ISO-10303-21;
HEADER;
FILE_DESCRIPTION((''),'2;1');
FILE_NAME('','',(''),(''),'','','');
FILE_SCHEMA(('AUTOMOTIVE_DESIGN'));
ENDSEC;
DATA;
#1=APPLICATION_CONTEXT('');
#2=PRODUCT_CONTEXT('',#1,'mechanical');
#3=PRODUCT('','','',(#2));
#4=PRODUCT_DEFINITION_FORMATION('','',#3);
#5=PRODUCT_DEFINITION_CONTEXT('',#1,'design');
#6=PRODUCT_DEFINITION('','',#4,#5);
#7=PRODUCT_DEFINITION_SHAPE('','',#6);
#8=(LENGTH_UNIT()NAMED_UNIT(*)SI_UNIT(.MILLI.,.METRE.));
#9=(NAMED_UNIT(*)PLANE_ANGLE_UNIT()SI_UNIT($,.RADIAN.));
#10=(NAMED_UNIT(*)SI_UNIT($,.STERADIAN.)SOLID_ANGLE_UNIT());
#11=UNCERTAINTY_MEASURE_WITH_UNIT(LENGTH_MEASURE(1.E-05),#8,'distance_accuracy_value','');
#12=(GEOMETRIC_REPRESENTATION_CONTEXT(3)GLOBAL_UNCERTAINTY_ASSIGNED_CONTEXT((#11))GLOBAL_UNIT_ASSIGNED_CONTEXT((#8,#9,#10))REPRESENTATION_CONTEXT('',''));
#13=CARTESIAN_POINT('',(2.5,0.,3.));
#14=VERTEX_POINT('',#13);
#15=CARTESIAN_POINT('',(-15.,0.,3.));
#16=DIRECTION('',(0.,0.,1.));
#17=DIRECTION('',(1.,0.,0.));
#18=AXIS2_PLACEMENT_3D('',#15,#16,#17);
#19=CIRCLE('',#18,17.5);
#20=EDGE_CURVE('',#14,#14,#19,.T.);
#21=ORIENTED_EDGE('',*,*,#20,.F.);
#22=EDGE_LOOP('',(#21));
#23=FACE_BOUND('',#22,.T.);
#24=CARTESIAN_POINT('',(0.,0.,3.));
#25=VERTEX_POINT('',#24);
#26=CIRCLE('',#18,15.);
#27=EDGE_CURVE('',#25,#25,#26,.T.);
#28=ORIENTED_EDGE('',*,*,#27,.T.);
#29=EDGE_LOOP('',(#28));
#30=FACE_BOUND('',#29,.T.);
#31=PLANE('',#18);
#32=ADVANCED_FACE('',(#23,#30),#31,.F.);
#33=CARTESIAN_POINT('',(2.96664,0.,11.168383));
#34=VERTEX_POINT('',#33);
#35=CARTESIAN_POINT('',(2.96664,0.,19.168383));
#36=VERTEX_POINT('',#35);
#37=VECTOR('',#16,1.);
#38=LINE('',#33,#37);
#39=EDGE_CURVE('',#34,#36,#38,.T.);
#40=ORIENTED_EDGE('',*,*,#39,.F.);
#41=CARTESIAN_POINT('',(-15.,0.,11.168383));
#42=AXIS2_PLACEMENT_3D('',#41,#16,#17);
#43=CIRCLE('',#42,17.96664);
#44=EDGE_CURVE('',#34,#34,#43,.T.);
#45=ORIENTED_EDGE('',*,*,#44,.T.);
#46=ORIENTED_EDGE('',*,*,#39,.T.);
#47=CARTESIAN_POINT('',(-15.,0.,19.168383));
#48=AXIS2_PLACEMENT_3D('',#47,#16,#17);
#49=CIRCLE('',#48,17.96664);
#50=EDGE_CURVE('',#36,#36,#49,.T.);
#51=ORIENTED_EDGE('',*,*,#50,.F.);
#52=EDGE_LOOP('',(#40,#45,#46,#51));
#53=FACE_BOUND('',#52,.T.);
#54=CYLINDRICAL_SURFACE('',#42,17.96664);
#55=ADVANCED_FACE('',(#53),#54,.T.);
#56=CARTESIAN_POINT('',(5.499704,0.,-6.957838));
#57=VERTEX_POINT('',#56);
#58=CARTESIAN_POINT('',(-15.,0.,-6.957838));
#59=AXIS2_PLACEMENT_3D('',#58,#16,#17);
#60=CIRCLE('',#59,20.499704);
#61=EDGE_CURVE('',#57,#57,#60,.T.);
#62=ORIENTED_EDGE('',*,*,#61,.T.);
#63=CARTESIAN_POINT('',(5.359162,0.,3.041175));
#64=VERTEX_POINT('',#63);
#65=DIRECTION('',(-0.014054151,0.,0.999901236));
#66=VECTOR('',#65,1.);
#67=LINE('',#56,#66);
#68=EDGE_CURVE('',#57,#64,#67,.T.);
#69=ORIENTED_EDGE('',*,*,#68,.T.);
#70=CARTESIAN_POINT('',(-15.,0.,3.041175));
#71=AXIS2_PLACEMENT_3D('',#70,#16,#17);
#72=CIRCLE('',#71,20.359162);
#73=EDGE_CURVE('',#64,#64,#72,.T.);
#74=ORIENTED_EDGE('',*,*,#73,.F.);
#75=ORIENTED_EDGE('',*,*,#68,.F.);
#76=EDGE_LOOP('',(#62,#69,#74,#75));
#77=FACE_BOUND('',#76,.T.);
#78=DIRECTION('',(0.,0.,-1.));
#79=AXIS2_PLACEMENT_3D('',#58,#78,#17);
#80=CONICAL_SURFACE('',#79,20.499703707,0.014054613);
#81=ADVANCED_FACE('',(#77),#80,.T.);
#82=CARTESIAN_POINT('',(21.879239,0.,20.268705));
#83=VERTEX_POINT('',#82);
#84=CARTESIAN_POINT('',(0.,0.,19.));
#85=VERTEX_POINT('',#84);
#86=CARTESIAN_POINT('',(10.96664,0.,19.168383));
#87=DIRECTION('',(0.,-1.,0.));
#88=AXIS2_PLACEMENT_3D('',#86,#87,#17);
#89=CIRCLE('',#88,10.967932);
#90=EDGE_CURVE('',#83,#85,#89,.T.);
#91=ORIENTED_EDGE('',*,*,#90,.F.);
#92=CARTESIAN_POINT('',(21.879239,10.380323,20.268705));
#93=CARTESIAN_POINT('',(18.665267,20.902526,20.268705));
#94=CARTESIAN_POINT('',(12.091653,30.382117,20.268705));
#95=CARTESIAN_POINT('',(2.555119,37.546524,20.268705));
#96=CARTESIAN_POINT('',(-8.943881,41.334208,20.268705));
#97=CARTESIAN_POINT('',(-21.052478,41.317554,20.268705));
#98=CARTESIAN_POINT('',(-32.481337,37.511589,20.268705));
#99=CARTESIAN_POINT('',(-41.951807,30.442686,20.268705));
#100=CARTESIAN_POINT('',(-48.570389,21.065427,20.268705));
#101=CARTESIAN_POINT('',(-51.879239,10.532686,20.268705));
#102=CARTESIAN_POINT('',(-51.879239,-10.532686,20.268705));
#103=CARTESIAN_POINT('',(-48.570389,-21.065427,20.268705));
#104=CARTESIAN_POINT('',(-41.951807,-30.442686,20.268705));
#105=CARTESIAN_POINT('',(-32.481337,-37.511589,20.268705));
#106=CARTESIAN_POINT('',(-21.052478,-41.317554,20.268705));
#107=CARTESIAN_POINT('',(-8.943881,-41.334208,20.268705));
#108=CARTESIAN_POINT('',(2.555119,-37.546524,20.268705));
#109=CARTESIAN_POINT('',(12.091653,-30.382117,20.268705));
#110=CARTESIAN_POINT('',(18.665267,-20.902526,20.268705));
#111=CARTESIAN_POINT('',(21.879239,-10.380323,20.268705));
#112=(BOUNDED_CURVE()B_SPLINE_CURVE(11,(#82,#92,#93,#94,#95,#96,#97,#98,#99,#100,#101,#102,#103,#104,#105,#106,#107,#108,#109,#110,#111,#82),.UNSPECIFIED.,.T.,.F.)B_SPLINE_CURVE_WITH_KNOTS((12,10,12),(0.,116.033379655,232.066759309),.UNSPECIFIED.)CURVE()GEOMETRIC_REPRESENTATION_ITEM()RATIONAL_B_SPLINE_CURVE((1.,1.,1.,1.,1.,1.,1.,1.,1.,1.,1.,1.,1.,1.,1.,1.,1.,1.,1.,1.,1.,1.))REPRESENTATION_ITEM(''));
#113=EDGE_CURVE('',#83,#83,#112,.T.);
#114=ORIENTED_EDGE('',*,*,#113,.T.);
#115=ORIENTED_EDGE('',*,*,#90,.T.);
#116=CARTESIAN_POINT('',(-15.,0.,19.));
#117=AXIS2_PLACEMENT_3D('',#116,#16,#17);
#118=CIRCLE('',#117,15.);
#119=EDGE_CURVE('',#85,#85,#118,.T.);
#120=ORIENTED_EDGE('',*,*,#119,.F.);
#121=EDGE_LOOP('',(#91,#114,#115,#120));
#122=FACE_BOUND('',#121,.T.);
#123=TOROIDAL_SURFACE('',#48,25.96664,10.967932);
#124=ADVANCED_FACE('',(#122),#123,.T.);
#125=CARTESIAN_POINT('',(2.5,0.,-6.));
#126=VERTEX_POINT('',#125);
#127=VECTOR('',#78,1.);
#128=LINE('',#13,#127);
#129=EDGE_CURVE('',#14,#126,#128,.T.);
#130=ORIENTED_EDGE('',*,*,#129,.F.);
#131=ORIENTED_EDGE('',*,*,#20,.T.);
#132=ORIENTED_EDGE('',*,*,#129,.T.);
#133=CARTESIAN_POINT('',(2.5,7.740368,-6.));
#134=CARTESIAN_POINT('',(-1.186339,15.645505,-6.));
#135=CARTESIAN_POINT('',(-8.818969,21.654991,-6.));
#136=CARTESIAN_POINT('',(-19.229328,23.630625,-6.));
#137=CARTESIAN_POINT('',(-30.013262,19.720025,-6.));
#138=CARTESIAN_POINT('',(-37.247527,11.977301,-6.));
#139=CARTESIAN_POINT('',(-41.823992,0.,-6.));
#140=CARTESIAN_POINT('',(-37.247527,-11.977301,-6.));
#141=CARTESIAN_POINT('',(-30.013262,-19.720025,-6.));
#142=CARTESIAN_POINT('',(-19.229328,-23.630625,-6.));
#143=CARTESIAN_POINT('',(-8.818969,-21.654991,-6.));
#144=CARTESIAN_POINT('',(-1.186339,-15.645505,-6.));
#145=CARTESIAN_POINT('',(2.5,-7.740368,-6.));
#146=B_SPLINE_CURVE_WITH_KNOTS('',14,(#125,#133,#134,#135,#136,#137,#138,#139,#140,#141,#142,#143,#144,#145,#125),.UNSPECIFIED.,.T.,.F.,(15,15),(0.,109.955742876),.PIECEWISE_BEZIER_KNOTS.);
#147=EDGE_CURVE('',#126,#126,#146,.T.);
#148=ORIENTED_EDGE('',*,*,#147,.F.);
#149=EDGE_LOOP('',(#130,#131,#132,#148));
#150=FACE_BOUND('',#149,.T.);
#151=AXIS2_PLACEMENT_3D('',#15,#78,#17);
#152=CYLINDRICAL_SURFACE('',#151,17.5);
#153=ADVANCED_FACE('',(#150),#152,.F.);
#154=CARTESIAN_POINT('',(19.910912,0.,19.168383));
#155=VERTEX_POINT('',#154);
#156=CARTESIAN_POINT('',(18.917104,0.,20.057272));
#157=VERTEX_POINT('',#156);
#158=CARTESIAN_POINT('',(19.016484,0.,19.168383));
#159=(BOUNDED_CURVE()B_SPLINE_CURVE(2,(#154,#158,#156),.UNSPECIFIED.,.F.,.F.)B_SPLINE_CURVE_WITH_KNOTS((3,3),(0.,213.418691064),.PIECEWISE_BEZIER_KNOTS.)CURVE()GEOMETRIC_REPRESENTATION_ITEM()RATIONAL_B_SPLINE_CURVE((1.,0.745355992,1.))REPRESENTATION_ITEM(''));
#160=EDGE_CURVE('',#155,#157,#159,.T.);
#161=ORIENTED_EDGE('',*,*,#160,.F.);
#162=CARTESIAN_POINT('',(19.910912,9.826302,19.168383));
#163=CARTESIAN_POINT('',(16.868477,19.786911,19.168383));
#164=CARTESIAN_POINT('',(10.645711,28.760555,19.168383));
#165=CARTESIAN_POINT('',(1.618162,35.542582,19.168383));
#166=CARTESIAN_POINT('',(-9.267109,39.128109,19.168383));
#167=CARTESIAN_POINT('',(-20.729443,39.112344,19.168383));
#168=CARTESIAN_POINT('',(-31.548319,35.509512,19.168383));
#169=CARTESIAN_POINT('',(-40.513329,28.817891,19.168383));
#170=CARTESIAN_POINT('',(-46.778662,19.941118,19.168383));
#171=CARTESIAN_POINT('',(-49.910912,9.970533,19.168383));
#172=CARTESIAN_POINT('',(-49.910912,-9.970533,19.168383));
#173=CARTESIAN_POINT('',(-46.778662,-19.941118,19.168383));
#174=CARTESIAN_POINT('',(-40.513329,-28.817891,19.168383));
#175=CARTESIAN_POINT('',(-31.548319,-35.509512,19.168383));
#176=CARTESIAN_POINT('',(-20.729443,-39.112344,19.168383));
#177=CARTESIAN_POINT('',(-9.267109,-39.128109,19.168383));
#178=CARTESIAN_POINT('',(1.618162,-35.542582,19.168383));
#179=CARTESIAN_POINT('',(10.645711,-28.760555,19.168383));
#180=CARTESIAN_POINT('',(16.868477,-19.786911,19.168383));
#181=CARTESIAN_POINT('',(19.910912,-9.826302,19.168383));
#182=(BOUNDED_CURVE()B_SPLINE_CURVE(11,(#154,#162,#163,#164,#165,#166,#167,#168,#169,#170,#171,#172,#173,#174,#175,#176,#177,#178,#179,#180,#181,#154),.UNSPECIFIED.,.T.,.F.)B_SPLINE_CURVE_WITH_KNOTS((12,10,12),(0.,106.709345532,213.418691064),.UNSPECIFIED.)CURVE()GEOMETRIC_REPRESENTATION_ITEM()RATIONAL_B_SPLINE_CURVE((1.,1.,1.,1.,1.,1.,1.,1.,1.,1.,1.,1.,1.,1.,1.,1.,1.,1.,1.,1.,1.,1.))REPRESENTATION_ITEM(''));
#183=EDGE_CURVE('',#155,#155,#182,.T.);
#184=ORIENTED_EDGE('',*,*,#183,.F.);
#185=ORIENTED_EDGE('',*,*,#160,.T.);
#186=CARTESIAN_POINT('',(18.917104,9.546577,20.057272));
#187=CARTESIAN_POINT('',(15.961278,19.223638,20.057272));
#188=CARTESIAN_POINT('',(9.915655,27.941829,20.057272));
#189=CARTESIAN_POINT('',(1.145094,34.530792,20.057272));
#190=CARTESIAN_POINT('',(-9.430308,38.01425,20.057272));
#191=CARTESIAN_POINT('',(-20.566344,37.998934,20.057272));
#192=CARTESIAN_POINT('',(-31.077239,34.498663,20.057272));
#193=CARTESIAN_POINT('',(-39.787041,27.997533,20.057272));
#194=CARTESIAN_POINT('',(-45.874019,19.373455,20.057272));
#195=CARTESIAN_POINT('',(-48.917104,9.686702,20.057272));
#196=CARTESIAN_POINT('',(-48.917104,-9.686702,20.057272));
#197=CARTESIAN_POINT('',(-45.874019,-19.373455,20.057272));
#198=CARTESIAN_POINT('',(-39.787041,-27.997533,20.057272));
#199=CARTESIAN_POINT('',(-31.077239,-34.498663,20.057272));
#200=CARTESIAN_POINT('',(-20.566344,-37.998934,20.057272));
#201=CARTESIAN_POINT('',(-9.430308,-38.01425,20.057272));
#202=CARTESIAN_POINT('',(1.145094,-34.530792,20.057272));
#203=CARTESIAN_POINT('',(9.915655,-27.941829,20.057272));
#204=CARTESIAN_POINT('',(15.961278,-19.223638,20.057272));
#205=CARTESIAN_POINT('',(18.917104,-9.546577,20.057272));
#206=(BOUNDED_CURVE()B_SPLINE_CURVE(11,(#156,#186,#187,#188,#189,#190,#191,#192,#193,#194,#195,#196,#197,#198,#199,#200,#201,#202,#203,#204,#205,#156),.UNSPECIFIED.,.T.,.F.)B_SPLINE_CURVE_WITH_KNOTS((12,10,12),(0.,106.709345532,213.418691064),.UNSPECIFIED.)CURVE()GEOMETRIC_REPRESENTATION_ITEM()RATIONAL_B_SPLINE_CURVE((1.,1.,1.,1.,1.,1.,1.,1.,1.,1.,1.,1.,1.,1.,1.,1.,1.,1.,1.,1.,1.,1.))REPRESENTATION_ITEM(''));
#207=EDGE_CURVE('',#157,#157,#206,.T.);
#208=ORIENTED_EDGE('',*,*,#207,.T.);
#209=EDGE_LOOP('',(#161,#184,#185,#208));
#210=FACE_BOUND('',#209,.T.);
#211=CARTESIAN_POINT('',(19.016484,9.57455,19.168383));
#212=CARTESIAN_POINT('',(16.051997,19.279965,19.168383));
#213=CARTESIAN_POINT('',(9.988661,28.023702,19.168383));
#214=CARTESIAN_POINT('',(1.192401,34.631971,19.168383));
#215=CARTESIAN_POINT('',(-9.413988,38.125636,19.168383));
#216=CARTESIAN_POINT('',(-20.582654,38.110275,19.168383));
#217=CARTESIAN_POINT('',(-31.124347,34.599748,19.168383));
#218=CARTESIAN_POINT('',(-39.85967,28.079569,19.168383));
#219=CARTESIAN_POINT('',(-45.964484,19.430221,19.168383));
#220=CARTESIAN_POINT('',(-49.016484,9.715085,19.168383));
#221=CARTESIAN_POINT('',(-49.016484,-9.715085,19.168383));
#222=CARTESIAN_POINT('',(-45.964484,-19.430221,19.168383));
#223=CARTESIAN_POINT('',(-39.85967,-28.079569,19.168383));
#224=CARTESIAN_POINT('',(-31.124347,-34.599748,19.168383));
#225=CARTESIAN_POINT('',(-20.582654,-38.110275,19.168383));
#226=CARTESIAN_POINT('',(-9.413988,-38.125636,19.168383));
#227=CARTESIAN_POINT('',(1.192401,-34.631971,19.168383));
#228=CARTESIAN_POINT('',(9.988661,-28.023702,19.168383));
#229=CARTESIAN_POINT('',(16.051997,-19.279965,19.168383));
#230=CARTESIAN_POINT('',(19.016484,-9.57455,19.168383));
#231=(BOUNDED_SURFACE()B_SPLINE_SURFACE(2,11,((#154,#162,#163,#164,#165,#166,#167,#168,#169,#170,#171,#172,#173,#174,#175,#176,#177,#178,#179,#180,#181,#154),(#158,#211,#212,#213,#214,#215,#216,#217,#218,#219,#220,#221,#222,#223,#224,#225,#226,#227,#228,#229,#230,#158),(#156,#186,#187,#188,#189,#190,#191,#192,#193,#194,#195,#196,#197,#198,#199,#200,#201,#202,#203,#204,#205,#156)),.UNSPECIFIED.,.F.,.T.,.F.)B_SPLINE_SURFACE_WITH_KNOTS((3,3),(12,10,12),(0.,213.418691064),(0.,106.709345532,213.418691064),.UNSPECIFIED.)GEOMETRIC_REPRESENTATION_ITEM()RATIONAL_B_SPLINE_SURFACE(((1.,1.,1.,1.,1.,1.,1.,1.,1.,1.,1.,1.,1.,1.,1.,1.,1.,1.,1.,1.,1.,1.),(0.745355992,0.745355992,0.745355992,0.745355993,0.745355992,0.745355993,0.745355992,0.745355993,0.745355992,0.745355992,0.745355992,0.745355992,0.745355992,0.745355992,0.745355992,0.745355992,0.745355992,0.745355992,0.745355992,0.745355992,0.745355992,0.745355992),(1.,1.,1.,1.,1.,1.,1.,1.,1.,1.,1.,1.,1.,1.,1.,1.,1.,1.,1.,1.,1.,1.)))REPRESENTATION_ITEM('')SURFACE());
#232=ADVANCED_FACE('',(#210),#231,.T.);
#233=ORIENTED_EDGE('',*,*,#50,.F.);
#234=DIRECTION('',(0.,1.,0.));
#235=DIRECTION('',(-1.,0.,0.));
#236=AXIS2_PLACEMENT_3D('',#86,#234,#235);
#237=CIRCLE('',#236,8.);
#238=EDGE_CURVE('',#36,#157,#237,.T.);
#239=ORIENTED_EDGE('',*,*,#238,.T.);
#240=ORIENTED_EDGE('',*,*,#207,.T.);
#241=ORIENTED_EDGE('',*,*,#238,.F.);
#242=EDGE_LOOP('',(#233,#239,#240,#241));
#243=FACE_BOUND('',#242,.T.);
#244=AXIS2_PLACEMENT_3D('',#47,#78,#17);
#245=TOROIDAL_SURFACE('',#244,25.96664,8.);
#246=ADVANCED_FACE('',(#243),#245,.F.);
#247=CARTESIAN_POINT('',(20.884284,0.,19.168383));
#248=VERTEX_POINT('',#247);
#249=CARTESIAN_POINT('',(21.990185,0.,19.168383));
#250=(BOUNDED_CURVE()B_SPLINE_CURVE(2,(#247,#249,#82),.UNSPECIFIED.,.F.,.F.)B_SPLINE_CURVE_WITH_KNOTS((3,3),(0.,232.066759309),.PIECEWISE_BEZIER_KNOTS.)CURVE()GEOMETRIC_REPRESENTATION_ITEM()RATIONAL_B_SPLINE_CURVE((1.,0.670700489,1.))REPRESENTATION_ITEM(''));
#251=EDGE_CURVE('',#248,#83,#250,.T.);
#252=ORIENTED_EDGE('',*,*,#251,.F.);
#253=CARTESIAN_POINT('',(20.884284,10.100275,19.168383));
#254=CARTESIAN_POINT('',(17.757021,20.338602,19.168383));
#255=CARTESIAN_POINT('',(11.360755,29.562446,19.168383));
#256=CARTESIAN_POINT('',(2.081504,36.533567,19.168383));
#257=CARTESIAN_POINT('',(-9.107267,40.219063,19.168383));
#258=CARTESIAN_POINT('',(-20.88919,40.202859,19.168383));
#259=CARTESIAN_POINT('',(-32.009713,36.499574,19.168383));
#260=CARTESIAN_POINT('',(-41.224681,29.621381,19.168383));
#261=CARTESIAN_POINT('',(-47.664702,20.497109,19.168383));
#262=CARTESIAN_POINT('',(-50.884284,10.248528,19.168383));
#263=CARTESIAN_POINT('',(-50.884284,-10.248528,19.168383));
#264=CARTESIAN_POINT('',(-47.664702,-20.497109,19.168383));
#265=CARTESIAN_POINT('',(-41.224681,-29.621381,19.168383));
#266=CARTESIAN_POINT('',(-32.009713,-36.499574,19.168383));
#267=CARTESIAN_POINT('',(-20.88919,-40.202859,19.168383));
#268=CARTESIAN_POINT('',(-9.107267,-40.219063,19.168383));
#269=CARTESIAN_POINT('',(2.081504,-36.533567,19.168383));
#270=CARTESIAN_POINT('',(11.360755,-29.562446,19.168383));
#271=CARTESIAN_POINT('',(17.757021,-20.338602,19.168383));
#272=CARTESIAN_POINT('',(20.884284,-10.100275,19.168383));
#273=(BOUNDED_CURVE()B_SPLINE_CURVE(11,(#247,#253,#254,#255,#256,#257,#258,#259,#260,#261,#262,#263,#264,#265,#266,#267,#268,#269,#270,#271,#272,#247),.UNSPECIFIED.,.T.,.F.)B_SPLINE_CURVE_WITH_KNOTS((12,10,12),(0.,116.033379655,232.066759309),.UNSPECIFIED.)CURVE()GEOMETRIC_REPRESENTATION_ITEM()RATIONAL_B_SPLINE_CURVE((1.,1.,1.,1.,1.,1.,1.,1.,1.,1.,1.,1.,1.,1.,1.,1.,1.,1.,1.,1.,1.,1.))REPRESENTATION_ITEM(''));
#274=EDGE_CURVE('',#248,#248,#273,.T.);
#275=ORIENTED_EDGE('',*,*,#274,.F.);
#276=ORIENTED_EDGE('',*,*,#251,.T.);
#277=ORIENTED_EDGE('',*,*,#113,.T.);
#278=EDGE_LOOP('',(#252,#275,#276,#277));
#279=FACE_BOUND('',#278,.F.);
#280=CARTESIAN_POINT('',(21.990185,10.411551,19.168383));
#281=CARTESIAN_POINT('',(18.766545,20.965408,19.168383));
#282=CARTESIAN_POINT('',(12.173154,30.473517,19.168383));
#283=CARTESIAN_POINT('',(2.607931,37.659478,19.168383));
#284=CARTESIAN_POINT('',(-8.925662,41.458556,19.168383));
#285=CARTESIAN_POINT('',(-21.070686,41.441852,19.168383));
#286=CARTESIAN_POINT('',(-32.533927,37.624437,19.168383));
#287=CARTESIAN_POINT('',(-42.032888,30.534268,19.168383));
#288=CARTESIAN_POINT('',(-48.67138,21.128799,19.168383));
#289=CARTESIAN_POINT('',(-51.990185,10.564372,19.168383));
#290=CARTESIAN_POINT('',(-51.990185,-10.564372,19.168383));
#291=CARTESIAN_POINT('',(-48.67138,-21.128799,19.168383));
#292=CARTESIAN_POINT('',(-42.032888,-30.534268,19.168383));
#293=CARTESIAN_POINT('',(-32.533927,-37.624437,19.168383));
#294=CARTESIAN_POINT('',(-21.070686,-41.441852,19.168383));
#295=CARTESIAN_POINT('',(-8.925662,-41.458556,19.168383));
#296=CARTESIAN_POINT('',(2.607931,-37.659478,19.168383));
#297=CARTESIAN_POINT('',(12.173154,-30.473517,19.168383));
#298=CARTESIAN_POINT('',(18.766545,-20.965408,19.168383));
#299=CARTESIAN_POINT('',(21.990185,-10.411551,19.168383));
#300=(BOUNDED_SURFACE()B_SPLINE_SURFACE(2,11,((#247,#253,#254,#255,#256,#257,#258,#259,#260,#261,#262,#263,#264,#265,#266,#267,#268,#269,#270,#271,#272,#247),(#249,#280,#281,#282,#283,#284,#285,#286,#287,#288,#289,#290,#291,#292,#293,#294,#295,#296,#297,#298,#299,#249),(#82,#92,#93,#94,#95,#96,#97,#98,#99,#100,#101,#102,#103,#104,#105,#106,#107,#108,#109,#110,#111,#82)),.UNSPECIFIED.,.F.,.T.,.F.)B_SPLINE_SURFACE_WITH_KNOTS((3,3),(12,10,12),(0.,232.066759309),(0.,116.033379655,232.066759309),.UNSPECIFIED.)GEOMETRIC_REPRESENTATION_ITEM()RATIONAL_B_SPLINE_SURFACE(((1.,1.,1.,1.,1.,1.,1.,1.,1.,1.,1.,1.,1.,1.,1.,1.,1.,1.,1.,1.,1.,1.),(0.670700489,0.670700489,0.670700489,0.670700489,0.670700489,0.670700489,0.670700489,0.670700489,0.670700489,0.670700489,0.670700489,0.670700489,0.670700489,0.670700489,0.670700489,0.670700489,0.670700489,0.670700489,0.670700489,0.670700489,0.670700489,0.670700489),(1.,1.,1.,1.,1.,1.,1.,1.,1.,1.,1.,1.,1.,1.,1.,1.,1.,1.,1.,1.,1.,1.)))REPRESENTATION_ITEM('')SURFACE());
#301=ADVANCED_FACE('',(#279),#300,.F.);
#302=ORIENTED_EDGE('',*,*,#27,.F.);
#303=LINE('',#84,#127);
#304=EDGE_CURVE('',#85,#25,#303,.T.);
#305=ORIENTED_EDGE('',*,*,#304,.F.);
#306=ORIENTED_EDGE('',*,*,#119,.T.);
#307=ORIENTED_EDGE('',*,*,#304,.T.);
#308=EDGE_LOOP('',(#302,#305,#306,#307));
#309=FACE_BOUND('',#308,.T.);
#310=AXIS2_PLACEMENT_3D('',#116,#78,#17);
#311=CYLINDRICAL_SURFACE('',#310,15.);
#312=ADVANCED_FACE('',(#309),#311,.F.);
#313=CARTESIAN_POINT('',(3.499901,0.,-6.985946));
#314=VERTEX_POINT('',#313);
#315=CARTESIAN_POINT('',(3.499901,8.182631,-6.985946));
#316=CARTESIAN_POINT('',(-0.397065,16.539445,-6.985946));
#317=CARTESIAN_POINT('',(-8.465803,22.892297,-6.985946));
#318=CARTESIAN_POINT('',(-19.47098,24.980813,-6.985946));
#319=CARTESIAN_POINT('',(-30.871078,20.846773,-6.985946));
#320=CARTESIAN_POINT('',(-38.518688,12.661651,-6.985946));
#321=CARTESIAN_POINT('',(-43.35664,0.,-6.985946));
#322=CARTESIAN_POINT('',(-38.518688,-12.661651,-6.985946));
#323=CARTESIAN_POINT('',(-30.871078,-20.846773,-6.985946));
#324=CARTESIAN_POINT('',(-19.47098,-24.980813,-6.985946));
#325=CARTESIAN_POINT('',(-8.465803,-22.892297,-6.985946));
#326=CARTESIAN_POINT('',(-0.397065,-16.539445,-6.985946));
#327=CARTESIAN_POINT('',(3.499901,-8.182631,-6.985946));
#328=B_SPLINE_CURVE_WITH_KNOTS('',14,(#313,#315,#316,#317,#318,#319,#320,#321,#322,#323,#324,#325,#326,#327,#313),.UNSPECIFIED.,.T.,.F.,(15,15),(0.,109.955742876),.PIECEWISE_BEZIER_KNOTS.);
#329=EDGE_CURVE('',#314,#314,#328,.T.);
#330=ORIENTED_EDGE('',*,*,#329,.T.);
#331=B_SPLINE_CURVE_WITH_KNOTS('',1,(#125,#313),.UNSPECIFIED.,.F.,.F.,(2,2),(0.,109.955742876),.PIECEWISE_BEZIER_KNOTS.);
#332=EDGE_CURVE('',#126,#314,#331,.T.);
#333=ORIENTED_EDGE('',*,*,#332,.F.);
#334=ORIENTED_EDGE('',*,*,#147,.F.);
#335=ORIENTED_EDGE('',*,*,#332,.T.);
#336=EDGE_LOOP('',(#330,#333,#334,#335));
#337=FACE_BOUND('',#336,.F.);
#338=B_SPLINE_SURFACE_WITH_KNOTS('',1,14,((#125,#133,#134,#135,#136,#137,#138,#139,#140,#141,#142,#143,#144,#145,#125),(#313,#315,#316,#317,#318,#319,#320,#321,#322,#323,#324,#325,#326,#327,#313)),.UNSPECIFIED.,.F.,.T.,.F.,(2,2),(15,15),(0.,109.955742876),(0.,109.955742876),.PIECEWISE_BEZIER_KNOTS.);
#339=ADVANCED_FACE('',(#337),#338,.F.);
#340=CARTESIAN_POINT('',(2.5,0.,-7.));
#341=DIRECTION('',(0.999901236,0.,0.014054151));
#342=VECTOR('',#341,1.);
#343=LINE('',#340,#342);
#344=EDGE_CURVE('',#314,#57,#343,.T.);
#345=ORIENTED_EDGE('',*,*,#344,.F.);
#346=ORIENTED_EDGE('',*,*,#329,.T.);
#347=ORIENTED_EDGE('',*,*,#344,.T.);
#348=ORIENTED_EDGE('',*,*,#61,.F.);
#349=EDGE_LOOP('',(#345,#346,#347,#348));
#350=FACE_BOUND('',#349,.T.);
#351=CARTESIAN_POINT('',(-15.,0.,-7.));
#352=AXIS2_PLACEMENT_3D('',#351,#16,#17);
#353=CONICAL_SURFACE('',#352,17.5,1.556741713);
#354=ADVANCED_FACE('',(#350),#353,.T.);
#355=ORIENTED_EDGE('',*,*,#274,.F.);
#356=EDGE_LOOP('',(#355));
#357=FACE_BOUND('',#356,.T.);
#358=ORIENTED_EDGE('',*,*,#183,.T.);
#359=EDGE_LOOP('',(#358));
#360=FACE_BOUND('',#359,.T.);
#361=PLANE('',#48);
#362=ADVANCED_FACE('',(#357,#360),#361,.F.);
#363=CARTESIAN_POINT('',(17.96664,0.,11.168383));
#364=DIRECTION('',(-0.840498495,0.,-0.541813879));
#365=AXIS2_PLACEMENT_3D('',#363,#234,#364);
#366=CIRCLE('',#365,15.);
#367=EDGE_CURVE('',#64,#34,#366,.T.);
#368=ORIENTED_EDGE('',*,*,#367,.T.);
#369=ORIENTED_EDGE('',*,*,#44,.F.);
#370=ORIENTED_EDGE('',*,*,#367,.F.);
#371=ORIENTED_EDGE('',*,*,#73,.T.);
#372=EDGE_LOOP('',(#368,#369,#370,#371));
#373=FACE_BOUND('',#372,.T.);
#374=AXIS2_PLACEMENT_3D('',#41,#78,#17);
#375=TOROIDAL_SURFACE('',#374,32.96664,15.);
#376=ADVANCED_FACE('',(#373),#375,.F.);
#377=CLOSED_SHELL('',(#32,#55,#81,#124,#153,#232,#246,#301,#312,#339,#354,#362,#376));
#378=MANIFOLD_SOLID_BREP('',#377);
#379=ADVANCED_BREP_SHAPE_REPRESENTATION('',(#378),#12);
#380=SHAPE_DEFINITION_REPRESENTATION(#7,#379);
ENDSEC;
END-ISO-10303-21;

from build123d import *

# Parameters (mm, degrees)
F2_R    = 1
F3_SIZE = 1


# Not quite as in the source:
# - a feature names something its author has since deleted; it is built from what else it names


with BuildPart() as f1:
    # F0 (on Front) → F1 (revolve)
    with BuildSketch(Plane.XZ):
        with BuildLine():
            Line((18.9666396311, 19.1683829889), (21.9345718714, 19.1683829889))
            ThreePointArc((21.9345718714, 19.1683829889), (10.8824456559, 30.1359920722), (0, 19))
            Line((0, 19), (0, 3))
            Line((0, 3), (2.5, 3))
            Line((2.5, 3), (2.5, -7))
            Line((2.5, -7), (5.4997037066, -6.957837548))
            Line((5.4997037066, -6.957837548), (5.3591622, 3.0411748075))
            ThreePointArc((5.3591622, 3.0411748075), (3.5771962529, 6.9323566355), (2.9666396311, 11.1683829889))
            Line((2.9666396311, 11.1683829889), (2.9666396311, 19.1683829889))
            ThreePointArc((2.9666396311, 19.1683829889), (10.9666396311, 27.1683829889), (18.9666396311, 19.1683829889))
        make_face()
    revolve(axis=Axis((-15, 0, 28.4551028162), (0, 0, 1)))

    # F2
    f2_edges = [f1.edges().sort_by_distance(p)[0] for p in [
        (-51.934572, 0, 19.168383),
        (-48.96664, 0, 19.168383),
    ]]
    fillet(f2_edges, radius=F2_R)

    # F3
    f3_edges = [f1.edges().sort_by_distance(p)[0] for p in [
        (-32.5, 0, -7),
    ]]
    chamfer(f3_edges, length=F3_SIZE)


solid = f1.part
